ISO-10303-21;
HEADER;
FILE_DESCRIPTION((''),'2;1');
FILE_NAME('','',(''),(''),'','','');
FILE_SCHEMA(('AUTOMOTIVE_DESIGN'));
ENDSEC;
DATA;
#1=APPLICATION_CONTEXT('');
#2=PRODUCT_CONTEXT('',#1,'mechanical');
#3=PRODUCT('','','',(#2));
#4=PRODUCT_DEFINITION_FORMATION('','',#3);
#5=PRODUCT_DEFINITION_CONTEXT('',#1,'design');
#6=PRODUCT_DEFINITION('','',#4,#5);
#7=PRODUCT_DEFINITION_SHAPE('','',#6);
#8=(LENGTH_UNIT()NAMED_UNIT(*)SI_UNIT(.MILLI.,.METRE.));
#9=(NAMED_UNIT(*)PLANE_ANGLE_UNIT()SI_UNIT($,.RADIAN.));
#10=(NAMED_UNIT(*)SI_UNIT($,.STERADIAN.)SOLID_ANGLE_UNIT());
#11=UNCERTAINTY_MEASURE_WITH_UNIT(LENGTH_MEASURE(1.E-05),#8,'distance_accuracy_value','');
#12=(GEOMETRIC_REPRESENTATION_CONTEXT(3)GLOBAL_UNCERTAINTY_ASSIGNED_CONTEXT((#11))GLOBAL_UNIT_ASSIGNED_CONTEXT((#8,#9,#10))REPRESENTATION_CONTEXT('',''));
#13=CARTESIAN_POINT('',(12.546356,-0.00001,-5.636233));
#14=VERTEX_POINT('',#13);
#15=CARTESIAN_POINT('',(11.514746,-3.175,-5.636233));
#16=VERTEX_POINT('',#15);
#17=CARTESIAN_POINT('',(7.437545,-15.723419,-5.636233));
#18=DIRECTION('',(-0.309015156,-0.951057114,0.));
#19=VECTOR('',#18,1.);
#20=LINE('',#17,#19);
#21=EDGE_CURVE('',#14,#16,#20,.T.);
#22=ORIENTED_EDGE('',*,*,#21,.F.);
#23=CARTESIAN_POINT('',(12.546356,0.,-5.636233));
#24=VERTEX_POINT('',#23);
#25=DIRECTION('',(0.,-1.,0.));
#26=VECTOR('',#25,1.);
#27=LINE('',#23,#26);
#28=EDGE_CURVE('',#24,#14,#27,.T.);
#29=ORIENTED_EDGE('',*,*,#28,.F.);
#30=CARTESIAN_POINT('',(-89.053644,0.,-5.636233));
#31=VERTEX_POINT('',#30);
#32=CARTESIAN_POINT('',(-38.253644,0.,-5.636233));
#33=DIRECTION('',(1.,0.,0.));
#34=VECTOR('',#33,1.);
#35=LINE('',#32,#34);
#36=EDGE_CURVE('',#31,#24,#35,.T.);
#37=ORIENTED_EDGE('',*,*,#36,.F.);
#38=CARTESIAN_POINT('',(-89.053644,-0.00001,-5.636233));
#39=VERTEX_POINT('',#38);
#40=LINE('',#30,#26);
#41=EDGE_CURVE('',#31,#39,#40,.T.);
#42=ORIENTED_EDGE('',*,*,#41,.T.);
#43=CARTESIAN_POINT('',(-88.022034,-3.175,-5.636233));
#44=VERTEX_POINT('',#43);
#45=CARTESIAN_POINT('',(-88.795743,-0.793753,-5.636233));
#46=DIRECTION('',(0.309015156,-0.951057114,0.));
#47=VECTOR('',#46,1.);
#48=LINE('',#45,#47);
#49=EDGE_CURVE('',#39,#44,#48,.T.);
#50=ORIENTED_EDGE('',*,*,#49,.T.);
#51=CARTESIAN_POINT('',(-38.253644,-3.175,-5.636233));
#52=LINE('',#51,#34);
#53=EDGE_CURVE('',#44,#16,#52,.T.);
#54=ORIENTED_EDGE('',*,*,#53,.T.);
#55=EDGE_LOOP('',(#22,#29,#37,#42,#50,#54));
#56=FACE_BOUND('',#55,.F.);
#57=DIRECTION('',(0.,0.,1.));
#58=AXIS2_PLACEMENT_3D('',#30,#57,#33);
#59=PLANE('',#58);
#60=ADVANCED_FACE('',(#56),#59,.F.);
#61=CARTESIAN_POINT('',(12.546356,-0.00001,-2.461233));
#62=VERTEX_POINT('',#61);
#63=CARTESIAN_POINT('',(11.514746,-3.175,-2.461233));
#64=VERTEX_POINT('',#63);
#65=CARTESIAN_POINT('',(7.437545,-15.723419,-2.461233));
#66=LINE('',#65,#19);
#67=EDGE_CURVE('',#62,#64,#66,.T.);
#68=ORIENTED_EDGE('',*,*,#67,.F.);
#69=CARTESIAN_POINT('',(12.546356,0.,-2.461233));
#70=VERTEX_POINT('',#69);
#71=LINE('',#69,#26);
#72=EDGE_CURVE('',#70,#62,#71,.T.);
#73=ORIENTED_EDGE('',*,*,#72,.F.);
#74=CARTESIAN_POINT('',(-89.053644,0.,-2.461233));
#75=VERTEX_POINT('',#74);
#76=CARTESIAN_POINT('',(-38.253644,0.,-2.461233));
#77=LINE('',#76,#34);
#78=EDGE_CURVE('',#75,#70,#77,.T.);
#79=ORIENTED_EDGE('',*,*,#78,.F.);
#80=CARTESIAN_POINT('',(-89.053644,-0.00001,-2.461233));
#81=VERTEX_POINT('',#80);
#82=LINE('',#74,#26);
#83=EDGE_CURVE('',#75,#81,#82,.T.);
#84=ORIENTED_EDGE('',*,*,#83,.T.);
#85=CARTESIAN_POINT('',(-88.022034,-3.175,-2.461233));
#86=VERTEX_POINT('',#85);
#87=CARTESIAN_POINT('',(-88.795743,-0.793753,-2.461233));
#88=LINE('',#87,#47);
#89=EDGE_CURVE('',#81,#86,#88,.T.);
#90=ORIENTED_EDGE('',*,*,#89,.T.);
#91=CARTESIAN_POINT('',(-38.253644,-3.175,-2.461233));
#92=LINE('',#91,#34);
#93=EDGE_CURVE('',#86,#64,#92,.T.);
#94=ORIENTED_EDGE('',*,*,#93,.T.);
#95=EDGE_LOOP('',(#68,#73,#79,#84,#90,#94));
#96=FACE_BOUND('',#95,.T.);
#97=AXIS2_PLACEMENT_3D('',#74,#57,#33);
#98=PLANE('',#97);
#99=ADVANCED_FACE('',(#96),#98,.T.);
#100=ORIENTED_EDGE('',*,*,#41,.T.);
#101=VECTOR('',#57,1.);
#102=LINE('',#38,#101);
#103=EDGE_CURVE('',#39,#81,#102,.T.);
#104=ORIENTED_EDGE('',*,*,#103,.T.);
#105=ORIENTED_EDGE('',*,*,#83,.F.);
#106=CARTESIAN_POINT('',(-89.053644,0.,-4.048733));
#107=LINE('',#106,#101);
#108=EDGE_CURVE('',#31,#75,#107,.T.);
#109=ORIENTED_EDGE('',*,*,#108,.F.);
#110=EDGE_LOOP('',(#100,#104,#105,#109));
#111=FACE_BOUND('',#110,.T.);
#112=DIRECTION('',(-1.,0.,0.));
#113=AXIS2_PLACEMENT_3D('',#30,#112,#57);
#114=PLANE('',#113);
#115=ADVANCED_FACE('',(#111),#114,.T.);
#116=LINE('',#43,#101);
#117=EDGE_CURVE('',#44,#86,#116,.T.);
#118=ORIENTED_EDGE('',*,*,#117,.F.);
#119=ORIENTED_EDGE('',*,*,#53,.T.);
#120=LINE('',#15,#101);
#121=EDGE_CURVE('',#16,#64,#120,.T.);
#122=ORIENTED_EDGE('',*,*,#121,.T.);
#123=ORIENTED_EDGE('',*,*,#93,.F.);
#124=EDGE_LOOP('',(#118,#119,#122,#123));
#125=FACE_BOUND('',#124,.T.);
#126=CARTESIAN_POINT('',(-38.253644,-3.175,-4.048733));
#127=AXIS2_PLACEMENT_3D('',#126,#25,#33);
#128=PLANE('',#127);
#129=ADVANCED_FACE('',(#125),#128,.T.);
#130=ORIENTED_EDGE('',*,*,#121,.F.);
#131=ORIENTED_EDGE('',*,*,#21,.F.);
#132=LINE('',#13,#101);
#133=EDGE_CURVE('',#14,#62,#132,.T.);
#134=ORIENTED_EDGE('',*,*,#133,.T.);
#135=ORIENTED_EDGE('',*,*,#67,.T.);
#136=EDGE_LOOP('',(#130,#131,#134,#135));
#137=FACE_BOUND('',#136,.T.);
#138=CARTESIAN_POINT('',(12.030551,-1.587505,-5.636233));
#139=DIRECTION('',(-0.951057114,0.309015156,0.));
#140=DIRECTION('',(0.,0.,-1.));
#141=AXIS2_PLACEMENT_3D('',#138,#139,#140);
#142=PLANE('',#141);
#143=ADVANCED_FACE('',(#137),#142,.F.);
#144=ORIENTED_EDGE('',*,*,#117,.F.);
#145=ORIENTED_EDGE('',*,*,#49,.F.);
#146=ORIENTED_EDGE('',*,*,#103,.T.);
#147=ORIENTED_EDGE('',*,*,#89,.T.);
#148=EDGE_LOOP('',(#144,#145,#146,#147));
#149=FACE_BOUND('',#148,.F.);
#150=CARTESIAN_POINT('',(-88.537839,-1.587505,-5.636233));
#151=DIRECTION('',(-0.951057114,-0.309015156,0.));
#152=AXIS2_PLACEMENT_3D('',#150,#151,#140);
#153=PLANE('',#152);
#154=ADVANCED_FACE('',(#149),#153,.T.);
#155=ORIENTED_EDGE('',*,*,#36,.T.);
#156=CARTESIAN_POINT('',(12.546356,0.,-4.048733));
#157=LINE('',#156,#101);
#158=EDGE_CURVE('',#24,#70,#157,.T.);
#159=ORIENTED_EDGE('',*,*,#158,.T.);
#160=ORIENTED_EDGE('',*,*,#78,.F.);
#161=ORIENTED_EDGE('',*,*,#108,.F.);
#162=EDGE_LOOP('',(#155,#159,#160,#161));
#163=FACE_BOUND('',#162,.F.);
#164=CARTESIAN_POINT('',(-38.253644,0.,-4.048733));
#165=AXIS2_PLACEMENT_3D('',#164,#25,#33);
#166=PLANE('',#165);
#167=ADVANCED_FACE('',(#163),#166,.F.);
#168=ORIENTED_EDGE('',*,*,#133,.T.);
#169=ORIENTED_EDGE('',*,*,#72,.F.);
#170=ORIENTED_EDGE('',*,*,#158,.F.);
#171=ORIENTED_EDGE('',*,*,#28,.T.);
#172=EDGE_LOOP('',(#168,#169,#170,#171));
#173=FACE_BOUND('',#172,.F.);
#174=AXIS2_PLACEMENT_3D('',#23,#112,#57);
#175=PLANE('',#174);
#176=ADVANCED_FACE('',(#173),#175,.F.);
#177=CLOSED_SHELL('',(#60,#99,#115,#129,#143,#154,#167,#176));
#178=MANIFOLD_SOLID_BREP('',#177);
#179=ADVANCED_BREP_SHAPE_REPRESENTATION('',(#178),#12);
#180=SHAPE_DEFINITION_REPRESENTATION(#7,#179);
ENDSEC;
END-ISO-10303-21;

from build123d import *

# Parameters (mm, degrees)
F0_W     = 101.6
F0_H     = 3.175
F1_DEPTH = 3.175
F2_SIZE2 = 1.03161
F2_SIZE  = 3.17499
F3_SIZE2 = 1.03161
F3_SIZE  = 3.17499


# Not quite as in the source:
# - a fillet or chamfer is up to 0.001 mm smaller than in the source, because OpenCascade refuses the exact size


with BuildPart() as f1:
    # F0 (on Front) → F1 (new body)
    with BuildSketch(Plane.XZ):
        with Locations((-38.2536438465, -4.0487329051)):
            Rectangle(F0_W, F0_H)
    extrude(amount=F1_DEPTH)

    # F2 (size 3.175 and 1.0316200355 in the source; OpenCascade refuses exactly that, so slightly less here)
    f2_edges = [f1.edges().sort_by_distance(p)[0] for p in [
        (-89.053644, -3.175, -4.048733),
    ]]
    f2_side = f1.faces().sort_by_distance((-89.053644, -1.5875, -4.048733))[0]
    chamfer(f2_edges, length=F2_SIZE, length2=F2_SIZE2, reference=f2_side)

    # F3 (size 3.175 and 1.0316200355 in the source; OpenCascade refuses exactly that, so slightly less here)
    f3_edges = [f1.edges().sort_by_distance(p)[0] for p in [
        (12.546356, -3.175, -4.048733),
    ]]
    f3_side = f1.faces().sort_by_distance((12.546356, -1.5875, -4.048733))[0]
    chamfer(f3_edges, length=F3_SIZE, length2=F3_SIZE2, reference=f3_side)


solid = f1.part
